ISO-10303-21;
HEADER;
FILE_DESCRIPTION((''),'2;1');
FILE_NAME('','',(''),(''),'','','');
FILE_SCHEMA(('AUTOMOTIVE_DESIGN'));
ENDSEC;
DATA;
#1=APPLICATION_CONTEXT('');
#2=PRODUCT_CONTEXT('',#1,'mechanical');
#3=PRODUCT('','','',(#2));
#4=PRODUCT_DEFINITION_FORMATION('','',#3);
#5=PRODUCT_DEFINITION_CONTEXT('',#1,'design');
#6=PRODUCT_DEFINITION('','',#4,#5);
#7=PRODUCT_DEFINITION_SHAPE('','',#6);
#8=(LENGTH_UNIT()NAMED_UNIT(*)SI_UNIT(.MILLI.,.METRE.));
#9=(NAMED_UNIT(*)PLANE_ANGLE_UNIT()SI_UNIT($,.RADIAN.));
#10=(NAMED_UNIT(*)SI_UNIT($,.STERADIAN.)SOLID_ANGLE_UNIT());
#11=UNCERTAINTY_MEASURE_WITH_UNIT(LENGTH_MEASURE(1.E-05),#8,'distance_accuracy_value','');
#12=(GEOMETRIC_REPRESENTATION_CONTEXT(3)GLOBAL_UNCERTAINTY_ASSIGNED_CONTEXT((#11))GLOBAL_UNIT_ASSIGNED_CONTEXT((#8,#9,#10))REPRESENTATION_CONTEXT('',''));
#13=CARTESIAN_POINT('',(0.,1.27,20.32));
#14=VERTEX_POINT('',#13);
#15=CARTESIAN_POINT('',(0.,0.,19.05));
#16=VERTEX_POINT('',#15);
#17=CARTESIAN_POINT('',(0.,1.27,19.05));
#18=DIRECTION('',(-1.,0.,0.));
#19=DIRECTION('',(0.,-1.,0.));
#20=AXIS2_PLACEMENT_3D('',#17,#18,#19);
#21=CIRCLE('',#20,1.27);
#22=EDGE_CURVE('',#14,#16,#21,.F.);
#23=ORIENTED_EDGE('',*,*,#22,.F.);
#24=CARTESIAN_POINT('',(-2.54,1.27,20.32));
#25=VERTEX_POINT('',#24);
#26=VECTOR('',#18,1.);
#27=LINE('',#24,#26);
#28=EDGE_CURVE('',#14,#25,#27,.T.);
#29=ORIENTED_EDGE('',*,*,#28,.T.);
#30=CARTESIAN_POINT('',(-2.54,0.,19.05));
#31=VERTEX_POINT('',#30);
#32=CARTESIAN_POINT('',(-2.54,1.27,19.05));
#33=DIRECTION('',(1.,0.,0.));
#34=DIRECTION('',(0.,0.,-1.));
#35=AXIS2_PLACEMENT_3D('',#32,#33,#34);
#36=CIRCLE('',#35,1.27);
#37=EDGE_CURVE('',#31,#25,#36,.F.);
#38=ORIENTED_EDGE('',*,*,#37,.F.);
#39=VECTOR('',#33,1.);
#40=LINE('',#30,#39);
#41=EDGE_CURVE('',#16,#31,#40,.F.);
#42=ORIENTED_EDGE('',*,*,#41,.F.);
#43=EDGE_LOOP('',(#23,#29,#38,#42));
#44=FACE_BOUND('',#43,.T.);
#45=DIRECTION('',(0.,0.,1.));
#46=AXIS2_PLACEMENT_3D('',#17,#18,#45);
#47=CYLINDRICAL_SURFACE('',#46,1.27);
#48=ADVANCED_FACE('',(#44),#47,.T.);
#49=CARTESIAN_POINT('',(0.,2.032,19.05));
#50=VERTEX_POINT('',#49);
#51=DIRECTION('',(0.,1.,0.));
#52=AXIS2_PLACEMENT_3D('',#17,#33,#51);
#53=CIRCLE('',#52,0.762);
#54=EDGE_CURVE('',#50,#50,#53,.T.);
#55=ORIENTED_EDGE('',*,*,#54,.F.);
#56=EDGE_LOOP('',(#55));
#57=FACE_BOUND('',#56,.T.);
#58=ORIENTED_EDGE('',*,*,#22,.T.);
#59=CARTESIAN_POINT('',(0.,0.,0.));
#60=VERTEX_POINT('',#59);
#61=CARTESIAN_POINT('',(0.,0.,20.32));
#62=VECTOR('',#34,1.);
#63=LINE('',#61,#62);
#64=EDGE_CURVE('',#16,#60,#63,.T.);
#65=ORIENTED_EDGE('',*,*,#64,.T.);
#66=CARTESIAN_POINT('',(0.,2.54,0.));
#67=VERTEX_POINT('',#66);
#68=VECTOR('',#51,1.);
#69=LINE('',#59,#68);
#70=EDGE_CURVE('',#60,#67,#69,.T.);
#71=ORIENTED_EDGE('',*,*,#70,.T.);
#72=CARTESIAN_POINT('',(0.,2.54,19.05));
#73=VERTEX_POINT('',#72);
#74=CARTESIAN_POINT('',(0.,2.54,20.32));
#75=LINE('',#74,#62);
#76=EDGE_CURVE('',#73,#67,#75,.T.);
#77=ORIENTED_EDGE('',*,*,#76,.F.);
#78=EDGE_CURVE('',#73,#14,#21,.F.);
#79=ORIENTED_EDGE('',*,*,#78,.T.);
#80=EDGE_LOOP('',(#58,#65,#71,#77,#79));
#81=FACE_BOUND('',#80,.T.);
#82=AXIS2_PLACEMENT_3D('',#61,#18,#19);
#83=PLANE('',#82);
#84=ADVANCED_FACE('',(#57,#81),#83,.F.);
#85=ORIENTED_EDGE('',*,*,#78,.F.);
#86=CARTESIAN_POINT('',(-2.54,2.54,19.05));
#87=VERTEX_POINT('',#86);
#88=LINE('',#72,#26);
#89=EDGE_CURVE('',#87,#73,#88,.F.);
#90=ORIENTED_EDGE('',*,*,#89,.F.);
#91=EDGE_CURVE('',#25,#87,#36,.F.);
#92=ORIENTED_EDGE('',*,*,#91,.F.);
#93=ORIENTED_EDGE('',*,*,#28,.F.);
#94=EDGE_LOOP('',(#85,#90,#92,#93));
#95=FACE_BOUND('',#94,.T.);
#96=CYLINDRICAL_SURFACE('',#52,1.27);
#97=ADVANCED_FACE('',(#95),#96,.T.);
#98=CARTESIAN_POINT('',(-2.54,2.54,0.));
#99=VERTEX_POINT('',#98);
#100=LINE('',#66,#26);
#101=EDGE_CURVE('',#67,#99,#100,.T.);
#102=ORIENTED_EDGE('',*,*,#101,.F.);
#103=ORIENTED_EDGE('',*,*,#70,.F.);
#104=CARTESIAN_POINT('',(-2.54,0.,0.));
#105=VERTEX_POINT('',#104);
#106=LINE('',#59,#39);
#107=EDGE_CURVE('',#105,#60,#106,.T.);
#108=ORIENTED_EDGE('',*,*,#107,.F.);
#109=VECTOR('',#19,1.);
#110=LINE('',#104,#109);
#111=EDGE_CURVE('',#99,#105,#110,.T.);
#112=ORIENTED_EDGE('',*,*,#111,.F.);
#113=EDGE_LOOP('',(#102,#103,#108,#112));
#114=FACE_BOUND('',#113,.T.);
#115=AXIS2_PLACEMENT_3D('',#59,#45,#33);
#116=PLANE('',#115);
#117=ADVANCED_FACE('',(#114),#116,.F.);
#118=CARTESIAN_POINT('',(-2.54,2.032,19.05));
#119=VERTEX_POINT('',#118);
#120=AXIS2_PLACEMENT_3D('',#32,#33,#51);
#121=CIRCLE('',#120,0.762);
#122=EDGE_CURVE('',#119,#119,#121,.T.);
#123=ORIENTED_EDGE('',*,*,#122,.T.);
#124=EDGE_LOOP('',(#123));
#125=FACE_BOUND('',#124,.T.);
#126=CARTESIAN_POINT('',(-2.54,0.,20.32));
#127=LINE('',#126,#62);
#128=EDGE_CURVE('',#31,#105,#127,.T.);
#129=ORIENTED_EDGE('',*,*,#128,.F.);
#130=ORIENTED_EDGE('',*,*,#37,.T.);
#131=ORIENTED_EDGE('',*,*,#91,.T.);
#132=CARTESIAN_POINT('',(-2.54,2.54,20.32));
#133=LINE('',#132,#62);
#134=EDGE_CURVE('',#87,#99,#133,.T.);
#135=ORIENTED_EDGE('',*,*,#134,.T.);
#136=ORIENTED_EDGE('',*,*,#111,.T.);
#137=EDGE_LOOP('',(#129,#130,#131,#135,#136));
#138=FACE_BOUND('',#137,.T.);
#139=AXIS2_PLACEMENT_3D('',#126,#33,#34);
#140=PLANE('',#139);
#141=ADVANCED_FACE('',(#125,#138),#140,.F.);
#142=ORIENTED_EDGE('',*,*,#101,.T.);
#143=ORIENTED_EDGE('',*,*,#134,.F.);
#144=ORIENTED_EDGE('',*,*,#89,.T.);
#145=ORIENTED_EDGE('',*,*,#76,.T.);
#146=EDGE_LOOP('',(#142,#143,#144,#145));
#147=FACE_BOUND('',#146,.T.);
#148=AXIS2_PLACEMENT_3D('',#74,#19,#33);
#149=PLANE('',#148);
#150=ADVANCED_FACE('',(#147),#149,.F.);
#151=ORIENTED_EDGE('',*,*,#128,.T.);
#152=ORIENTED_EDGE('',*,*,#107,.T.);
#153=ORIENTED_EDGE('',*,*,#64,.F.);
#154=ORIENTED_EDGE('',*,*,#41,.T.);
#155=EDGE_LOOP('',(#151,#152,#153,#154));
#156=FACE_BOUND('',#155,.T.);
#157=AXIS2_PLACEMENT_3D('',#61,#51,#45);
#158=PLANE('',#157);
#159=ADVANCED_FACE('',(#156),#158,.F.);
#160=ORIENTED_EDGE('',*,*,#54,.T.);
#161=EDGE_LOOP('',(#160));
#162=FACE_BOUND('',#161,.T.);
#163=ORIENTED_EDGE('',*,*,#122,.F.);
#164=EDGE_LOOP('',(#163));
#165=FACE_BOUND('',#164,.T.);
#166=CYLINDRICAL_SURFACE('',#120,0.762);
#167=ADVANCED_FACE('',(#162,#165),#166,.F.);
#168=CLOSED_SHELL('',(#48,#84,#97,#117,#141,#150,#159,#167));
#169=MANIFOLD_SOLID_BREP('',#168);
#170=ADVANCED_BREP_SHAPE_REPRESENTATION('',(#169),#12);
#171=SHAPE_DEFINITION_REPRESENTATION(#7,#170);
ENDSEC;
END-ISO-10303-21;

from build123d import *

# Parameters (mm, degrees)
SKETCH1_W           = 2.54
SKETCH1_H           = 2.54
BOSS_EXTRUDE1_DEPTH = 20.32
FILLET1_R           = 1.27
SKETCH2_R           = 0.762
CUT_EXTRUDE1_DEPTH  = 21.635057548


with BuildPart() as part:
    # Sketch1 → Boss-Extrude1 (new body)
    with BuildSketch(Plane.XY):
        with Locations((-1.27, 1.27)):
            Rectangle(SKETCH1_W, SKETCH1_H)
    extrude(amount=BOSS_EXTRUDE1_DEPTH)

    # Fillet1
    fillet1_edges = [part.edges().sort_by_distance(p)[0] for p in [
        (-1.27, 0, 20.32),
        (-1.27, 2.54, 20.32),
    ]]
    fillet(fillet1_edges, radius=FILLET1_R - 0.0001)  # a hair under: the kernel refuses the full size

    # Sketch2 → Cut-Extrude1 (cut, through all)
    with BuildSketch(Plane(origin=(0, 0, 0), x_dir=(0, 0, -1), z_dir=(1, 0, 0))):
        with Locations(Location((-19.05, 1.27, 0), (0, 0, 90))):
            Circle(SKETCH2_R)
    extrude(amount=-CUT_EXTRUDE1_DEPTH, mode=Mode.SUBTRACT)


solid = part.part
